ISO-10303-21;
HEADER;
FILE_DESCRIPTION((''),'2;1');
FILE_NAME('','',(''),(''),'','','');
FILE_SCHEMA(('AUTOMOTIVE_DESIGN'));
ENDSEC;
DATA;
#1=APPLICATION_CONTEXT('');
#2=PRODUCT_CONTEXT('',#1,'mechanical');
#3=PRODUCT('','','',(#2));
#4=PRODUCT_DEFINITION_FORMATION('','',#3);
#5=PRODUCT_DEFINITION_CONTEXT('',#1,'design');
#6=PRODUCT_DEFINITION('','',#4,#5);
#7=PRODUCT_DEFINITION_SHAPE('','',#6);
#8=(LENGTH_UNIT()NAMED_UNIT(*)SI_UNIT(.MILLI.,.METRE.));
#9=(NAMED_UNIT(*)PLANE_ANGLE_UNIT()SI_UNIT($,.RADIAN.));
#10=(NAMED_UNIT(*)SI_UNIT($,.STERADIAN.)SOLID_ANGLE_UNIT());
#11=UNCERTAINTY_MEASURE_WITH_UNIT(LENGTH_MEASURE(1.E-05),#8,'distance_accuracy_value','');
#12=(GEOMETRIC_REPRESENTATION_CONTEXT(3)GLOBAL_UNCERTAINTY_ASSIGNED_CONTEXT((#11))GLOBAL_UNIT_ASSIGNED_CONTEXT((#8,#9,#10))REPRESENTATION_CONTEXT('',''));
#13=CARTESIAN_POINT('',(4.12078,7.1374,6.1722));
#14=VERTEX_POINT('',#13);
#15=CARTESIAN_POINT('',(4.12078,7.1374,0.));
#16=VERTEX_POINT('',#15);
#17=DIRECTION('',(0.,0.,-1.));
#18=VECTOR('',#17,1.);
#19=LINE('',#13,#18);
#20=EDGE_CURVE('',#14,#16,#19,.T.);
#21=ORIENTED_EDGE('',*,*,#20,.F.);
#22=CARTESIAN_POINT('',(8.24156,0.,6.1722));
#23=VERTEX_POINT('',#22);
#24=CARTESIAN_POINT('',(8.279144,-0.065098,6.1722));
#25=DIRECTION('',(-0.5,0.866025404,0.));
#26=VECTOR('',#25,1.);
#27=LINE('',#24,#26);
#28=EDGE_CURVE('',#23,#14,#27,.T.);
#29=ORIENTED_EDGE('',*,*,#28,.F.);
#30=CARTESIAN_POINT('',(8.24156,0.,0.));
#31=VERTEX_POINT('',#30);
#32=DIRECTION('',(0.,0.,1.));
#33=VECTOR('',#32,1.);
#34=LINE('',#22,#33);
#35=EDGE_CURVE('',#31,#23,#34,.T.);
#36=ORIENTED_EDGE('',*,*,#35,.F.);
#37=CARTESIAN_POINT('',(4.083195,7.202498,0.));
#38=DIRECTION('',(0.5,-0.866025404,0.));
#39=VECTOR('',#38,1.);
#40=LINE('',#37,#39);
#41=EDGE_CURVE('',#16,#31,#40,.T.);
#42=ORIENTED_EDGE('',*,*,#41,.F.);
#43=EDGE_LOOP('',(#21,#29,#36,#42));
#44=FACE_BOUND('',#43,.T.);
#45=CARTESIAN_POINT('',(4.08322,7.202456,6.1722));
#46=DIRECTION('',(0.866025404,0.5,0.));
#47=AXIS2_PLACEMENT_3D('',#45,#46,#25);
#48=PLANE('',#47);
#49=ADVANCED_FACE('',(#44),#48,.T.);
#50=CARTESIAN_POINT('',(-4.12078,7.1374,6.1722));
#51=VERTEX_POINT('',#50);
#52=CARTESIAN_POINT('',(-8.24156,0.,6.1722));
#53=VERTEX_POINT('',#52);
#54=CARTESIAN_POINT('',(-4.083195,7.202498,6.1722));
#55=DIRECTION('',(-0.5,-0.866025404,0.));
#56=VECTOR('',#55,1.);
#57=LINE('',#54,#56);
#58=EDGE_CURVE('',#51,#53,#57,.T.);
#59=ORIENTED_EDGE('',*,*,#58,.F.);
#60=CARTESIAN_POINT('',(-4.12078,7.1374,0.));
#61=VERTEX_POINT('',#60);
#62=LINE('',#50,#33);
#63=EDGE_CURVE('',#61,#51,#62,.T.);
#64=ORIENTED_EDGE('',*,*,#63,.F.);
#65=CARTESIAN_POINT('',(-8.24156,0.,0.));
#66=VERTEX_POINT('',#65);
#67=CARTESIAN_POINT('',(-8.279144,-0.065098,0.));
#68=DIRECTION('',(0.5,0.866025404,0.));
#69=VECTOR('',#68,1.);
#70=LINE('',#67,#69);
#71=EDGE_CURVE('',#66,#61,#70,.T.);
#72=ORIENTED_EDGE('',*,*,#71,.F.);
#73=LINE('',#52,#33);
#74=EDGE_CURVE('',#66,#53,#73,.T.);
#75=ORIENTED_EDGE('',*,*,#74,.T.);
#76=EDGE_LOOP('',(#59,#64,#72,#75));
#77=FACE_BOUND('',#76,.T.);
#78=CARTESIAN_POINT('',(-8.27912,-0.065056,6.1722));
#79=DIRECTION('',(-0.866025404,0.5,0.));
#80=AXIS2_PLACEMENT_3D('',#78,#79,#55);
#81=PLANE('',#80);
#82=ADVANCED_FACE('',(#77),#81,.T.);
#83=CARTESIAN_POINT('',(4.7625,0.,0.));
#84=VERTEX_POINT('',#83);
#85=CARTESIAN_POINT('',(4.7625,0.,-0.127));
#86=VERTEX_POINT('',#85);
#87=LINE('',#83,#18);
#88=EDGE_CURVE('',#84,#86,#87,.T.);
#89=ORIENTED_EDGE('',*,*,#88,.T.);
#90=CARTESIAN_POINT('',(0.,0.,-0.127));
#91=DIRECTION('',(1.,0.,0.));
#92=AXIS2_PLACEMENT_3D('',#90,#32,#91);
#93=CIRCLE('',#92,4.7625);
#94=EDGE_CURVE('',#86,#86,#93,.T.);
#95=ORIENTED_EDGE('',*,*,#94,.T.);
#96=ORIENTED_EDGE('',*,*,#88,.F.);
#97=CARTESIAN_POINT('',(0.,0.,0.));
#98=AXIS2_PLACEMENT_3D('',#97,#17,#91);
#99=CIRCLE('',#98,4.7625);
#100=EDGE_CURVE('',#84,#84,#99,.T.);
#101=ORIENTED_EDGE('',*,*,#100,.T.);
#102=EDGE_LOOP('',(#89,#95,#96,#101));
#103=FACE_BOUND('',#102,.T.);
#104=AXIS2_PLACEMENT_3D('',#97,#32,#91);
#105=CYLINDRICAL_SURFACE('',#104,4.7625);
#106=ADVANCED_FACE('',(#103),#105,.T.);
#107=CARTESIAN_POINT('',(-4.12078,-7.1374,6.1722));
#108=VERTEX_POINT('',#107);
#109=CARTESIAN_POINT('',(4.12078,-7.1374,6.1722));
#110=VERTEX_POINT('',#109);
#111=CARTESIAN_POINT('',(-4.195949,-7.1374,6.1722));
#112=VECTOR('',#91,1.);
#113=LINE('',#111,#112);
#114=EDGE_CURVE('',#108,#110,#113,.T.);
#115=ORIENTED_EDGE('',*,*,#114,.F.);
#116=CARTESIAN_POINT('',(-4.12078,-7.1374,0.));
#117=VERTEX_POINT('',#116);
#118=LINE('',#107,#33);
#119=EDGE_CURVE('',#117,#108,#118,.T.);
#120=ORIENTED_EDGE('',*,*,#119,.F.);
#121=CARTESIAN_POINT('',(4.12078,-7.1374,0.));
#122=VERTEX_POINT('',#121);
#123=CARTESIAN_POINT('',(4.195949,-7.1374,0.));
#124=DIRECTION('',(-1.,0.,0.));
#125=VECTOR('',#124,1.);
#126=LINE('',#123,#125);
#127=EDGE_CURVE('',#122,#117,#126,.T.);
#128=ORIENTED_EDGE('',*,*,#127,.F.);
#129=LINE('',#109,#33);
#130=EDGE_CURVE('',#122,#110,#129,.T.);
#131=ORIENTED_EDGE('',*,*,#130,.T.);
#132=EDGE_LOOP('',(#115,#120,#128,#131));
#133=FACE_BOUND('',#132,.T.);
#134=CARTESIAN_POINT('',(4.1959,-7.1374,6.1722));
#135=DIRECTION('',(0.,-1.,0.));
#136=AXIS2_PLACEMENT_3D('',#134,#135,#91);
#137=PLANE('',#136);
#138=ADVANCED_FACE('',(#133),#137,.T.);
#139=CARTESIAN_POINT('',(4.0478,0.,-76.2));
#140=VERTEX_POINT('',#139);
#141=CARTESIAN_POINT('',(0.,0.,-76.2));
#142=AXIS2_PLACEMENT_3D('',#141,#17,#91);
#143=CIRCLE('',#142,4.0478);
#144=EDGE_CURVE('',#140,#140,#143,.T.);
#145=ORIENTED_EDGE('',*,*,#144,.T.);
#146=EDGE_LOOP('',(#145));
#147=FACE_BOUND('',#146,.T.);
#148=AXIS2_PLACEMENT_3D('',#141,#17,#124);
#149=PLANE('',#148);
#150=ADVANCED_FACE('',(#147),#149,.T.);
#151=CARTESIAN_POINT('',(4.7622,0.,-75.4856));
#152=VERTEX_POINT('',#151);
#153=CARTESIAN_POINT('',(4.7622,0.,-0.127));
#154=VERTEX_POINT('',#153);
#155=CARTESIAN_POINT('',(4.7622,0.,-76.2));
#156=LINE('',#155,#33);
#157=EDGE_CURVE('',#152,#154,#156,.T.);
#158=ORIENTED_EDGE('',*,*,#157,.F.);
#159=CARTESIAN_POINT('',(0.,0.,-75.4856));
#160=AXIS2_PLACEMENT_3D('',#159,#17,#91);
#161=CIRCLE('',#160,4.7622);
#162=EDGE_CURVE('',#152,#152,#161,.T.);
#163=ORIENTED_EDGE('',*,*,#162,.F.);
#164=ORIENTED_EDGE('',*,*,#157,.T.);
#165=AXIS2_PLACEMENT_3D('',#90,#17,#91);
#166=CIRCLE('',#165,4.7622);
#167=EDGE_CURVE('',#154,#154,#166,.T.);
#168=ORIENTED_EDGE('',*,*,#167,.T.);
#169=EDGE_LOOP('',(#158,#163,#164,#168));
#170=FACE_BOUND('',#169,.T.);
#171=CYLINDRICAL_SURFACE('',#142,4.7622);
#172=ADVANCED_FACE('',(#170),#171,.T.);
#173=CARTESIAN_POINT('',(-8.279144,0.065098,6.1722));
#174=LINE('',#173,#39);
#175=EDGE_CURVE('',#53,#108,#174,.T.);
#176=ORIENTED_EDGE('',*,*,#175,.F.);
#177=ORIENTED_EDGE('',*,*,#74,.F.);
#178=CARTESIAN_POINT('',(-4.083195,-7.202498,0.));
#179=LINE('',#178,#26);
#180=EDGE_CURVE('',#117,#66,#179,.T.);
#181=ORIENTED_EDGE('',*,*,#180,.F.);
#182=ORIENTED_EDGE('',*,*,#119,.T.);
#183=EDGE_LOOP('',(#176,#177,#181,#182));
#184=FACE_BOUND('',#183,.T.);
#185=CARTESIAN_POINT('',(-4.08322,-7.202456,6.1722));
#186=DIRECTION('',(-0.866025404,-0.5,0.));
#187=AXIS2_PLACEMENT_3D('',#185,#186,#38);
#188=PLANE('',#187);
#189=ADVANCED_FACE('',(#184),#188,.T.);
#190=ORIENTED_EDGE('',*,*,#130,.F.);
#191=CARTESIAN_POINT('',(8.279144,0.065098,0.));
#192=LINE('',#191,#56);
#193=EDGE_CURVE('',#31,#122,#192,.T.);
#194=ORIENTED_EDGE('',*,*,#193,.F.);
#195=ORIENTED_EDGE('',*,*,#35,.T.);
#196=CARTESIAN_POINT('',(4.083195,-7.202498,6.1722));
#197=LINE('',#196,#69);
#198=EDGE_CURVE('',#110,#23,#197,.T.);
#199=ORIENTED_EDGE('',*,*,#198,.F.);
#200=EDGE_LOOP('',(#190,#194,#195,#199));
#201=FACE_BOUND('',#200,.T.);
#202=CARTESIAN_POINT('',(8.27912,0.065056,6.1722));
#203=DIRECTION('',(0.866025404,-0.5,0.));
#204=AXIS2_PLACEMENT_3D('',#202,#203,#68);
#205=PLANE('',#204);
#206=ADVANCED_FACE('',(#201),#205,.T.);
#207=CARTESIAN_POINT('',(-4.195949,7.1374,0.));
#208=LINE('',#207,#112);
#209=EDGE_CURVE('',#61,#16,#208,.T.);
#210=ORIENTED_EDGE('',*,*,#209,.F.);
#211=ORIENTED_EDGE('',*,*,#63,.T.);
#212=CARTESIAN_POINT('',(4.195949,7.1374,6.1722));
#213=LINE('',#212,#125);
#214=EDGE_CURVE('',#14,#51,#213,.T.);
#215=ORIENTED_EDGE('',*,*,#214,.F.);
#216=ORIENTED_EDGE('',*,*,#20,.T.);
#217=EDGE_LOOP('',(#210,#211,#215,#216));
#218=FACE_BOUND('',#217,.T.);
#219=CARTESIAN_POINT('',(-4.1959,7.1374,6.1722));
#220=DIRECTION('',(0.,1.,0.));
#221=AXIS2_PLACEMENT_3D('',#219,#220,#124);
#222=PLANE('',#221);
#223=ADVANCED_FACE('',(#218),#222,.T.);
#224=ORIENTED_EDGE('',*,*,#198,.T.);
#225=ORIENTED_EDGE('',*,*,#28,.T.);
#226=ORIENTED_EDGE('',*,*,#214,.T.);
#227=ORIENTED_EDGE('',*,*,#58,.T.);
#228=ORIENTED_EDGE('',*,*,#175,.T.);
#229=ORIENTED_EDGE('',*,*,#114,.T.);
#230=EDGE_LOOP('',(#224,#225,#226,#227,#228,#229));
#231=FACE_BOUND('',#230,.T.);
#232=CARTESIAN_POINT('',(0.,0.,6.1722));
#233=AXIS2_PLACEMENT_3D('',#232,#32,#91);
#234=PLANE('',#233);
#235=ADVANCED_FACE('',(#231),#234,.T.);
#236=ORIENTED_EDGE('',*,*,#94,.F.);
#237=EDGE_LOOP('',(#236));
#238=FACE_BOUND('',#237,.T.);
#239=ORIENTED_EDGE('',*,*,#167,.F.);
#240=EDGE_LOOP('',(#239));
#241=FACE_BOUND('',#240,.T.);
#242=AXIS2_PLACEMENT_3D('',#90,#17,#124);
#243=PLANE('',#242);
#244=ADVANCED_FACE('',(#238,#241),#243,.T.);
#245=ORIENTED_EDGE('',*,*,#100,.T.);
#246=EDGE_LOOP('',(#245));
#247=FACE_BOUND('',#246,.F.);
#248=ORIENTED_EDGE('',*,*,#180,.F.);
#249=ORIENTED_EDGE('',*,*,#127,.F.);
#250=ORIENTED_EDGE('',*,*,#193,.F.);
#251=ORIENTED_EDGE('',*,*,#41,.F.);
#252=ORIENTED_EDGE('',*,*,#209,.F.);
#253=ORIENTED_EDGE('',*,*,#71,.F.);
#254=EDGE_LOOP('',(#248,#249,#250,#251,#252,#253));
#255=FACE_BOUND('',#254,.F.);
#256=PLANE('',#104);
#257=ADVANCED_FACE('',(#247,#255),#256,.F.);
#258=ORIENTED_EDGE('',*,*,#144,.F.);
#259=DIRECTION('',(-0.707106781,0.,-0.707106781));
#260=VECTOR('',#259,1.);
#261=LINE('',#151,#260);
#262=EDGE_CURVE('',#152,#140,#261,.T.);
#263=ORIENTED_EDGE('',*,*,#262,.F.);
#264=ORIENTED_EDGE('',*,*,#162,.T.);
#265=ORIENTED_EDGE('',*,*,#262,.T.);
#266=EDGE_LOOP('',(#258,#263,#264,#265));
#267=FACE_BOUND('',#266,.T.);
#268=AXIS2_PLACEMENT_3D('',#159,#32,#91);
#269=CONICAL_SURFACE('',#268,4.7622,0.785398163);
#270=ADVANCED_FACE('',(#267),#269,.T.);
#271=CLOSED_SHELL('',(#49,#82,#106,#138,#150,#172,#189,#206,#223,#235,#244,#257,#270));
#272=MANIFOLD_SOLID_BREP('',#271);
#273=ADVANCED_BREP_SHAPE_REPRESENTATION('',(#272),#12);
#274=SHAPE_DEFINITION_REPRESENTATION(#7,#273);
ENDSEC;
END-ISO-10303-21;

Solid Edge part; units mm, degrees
sketch "Sketch1" plane through (0, 0, 0) normal (0, 0, 1) x (1, 0, 0)
  circle A0 centre (0, 0) radius 8.2794
  dimension "D1" = 16.5588
extrude "Protrusion1" add sketch "Sketch1" along normal blind 6.1722
sketch "Sketch2" plane through (0, 0, 0) normal (0, 0, -1) x (1, 0, 0)
  circle A0 centre (0, 0) radius 4.7625
extrude "Protrusion2" add sketch "Sketch2" along normal blind 76.2
sketch "Sketch3" plane through (0, 0, -76.2) normal (0, 0, -1) x (1, 0, 0)
  circle A0 centre (0, 0) radius 4.7622
extrude "Cutout1" cut sketch "Sketch3" against normal blind 76.073 flip side to cut
chamfer "Chamfer_1" distance 0.7144 angle 45 1 edges at (-4.7622, 0, -76.2)
sketch "Sketch4" plane through (0, 0, 6.1722) normal (0, 0, 1) x (1, 0, 0)
  line L0 (-4.1959, 7.1374) -> (4.1959, 7.1374)
  dimension "D1" = 14.2748
extrude "Cutout2" cut sketch "Sketch4" against normal up to next material side at (0, 7.1874, 6.1722)
pattern_circular "Pattern1" count 6 over 360 about axis through (0, 0, 6.1722) along (0, 0, 1) of "Cutout2"
properties part number "24102457"
